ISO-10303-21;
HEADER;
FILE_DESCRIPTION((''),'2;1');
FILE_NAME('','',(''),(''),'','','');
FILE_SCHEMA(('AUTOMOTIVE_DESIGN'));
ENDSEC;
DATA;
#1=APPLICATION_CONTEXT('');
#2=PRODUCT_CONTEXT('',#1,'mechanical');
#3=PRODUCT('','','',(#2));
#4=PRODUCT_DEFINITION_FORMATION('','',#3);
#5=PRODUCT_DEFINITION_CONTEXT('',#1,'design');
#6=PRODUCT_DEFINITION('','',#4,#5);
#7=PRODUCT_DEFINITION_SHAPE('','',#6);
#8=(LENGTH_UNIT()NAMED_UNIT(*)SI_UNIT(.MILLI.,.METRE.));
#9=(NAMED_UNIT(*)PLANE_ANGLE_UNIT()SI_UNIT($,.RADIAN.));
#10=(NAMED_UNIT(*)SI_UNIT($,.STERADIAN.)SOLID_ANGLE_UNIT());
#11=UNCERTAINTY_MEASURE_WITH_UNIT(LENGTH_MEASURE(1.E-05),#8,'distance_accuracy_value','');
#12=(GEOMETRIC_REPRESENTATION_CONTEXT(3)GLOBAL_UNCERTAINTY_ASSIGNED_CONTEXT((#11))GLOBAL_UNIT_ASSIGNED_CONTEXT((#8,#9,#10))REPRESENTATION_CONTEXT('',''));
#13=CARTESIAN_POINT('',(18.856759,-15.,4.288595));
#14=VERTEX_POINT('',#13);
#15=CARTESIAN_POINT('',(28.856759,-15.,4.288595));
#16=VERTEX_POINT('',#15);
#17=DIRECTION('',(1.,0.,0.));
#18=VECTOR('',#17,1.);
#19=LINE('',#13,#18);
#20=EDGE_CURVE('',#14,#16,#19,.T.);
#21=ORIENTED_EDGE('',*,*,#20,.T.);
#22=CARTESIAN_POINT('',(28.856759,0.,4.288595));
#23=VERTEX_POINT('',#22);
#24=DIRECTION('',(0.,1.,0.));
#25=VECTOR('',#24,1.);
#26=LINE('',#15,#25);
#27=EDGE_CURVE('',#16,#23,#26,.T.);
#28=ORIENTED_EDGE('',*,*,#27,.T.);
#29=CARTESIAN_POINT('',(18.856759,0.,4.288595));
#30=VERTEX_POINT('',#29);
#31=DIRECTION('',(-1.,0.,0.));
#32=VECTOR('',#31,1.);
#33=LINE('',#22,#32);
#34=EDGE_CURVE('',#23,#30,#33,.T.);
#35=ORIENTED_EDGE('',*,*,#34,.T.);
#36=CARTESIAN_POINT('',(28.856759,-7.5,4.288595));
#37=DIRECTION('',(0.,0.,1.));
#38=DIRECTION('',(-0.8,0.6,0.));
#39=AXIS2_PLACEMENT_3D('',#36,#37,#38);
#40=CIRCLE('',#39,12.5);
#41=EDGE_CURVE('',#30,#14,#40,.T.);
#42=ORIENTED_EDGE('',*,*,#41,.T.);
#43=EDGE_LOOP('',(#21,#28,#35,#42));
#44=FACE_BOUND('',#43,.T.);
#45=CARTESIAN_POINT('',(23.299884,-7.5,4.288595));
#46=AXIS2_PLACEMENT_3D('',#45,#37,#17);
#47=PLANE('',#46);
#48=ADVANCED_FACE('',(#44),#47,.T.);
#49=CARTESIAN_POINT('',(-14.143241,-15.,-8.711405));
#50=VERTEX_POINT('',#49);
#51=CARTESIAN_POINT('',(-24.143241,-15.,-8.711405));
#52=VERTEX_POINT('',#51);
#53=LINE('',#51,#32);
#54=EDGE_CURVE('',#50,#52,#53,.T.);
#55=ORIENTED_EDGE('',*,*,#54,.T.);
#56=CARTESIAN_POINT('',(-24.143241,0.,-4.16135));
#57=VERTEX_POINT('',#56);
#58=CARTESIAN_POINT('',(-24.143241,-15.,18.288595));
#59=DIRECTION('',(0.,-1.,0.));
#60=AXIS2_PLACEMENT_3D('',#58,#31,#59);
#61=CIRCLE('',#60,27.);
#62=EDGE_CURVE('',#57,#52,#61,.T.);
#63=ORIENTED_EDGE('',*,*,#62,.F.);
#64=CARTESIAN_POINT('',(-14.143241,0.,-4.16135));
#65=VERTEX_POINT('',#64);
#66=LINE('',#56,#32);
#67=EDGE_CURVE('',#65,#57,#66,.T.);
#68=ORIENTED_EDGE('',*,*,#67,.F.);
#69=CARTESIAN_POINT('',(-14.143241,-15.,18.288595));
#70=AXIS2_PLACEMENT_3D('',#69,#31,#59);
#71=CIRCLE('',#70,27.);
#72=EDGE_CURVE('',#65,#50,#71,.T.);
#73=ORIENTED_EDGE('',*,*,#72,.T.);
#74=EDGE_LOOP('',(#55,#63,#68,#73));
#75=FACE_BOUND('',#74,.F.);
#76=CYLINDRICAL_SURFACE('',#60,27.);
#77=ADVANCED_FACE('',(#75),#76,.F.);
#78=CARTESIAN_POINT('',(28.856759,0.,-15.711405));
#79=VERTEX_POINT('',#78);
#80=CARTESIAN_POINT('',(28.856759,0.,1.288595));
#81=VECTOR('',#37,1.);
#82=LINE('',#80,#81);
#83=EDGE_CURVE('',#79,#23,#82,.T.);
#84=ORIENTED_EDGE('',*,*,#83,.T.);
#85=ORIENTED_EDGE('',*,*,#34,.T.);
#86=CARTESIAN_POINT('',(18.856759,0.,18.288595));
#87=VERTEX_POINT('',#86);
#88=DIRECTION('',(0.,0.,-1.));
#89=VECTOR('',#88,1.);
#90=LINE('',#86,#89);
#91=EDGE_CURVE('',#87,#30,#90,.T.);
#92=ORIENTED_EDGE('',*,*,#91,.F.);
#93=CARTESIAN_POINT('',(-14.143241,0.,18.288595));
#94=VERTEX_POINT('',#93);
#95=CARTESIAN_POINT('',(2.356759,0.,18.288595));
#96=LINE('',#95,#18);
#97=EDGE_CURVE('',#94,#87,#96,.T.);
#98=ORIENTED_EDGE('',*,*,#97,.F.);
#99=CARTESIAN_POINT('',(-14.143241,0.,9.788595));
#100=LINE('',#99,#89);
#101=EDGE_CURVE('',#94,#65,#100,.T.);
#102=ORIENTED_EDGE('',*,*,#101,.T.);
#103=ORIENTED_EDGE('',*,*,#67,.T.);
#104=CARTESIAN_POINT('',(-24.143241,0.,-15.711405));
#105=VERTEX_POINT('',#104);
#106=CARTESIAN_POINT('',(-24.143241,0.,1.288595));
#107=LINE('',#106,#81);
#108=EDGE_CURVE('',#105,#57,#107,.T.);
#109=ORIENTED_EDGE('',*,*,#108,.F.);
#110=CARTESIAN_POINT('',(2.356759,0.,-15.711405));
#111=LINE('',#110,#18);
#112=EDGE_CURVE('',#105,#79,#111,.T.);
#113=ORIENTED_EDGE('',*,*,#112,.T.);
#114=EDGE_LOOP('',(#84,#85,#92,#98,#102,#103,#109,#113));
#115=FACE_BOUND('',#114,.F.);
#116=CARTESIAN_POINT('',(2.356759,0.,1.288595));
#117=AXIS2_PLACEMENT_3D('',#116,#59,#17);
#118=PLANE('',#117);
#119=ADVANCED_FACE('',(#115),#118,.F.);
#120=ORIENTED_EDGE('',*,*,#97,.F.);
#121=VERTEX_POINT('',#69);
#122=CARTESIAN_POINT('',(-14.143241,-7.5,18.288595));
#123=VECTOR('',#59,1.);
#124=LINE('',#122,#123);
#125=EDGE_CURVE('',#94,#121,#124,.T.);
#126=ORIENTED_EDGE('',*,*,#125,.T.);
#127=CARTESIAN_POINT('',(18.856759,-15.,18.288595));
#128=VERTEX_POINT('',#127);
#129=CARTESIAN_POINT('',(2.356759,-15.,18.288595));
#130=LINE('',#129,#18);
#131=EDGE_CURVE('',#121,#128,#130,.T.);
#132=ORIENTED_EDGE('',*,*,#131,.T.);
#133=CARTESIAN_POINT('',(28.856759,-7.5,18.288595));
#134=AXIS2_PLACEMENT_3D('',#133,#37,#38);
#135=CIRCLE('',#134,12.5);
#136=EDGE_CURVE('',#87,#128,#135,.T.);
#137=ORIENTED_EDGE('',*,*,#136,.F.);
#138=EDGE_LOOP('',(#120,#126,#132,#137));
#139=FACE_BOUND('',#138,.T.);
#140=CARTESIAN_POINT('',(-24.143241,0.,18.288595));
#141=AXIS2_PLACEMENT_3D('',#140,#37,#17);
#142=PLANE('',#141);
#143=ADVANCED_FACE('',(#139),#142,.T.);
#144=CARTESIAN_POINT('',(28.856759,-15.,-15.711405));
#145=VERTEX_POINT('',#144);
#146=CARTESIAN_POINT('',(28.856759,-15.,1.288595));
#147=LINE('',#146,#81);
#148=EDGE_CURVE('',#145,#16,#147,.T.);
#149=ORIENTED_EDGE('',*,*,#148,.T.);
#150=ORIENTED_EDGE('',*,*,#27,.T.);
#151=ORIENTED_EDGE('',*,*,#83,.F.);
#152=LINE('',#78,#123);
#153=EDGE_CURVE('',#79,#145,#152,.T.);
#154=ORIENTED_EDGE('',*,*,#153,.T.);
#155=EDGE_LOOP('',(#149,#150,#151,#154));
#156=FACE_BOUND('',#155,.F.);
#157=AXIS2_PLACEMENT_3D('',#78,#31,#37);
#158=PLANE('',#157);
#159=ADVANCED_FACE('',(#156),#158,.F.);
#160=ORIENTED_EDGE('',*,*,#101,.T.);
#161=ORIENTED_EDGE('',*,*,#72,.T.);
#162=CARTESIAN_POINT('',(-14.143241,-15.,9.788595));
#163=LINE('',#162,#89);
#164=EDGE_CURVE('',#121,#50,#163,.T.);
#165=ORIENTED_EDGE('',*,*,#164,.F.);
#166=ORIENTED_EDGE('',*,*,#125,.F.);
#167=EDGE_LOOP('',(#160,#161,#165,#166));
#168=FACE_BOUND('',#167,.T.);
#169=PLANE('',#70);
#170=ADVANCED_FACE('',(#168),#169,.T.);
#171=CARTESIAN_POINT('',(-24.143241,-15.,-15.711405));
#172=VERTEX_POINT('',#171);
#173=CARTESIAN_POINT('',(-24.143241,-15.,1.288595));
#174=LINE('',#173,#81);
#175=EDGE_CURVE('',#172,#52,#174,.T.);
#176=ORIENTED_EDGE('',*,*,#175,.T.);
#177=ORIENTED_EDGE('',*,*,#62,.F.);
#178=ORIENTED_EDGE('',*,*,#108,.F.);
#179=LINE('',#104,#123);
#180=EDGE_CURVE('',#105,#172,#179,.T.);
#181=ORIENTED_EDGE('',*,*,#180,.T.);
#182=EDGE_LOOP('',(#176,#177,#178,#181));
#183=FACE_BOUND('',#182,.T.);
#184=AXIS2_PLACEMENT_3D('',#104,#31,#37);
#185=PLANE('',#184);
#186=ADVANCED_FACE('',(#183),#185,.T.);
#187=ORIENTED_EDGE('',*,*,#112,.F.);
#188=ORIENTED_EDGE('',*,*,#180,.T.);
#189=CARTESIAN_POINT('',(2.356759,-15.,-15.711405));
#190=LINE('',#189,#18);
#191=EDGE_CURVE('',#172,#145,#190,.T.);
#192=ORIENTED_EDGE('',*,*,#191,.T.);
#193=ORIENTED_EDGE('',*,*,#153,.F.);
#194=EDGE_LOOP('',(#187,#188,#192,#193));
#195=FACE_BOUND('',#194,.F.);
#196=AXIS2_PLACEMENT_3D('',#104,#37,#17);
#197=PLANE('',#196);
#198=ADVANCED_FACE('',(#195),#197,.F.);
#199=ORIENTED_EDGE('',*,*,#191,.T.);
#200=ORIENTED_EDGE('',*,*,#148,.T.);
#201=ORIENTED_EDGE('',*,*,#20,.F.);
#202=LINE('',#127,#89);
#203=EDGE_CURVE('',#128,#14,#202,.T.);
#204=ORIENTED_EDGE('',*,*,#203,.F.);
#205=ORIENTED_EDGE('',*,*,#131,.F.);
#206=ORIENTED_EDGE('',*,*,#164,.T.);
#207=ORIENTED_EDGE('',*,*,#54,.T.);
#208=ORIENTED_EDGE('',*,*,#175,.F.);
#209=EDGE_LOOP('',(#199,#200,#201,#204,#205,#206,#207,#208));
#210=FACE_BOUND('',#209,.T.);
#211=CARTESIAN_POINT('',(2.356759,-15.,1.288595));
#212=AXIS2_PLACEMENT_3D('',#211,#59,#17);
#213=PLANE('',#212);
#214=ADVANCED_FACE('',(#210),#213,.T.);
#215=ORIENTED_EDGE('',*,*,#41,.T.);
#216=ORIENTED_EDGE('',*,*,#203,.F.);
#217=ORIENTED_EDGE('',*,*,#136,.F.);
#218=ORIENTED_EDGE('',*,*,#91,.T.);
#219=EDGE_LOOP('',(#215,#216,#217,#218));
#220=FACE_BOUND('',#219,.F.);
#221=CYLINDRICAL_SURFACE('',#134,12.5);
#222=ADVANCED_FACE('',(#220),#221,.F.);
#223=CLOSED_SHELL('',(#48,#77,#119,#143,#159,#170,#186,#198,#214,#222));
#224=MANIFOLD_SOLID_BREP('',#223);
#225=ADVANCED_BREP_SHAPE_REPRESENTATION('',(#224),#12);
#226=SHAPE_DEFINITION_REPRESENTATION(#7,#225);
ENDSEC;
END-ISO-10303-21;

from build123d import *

# Parameters (mm, degrees)
F0_W     = 53
F0_H     = 34
F1_DEPTH = 15
F2_R     = 27
F3_DEPTH = 10
F5_DEPTH = 14


with BuildPart() as f1:
    # F0 (on Front) → F1 (new body)
    with BuildSketch(Plane.XZ):
        with Locations((2.3567589563, 1.288594678)):
            Rectangle(F0_W, F0_H)
    extrude(amount=F1_DEPTH)

    # F2 (on face) → F3 (cut)
    with BuildSketch(Plane(origin=(-24.1432410437, 0, 0), x_dir=(0, -1, 0), z_dir=(-1, 0, 0))):
        with Locations((15, 18.288594678)):
            Circle(F2_R)
    extrude(amount=-F3_DEPTH, mode=Mode.SUBTRACT)

    # F4 (on face) → F5 (cut)
    with BuildSketch(Plane.XY.offset(18.288594678)):
        with BuildLine():
            Line((28.8567589563, 0), (18.8567589563, 0))
            ThreePointArc((18.8567589563, 0), (16.3567589563, -7.5), (18.8567589563, -15))
            Line((18.8567589563, -15), (28.8567589563, -15))
            Line((28.8567589563, -15), (28.8567589563, 0))
        make_face()
    extrude(amount=-F5_DEPTH, mode=Mode.SUBTRACT)


solid = f1.part
